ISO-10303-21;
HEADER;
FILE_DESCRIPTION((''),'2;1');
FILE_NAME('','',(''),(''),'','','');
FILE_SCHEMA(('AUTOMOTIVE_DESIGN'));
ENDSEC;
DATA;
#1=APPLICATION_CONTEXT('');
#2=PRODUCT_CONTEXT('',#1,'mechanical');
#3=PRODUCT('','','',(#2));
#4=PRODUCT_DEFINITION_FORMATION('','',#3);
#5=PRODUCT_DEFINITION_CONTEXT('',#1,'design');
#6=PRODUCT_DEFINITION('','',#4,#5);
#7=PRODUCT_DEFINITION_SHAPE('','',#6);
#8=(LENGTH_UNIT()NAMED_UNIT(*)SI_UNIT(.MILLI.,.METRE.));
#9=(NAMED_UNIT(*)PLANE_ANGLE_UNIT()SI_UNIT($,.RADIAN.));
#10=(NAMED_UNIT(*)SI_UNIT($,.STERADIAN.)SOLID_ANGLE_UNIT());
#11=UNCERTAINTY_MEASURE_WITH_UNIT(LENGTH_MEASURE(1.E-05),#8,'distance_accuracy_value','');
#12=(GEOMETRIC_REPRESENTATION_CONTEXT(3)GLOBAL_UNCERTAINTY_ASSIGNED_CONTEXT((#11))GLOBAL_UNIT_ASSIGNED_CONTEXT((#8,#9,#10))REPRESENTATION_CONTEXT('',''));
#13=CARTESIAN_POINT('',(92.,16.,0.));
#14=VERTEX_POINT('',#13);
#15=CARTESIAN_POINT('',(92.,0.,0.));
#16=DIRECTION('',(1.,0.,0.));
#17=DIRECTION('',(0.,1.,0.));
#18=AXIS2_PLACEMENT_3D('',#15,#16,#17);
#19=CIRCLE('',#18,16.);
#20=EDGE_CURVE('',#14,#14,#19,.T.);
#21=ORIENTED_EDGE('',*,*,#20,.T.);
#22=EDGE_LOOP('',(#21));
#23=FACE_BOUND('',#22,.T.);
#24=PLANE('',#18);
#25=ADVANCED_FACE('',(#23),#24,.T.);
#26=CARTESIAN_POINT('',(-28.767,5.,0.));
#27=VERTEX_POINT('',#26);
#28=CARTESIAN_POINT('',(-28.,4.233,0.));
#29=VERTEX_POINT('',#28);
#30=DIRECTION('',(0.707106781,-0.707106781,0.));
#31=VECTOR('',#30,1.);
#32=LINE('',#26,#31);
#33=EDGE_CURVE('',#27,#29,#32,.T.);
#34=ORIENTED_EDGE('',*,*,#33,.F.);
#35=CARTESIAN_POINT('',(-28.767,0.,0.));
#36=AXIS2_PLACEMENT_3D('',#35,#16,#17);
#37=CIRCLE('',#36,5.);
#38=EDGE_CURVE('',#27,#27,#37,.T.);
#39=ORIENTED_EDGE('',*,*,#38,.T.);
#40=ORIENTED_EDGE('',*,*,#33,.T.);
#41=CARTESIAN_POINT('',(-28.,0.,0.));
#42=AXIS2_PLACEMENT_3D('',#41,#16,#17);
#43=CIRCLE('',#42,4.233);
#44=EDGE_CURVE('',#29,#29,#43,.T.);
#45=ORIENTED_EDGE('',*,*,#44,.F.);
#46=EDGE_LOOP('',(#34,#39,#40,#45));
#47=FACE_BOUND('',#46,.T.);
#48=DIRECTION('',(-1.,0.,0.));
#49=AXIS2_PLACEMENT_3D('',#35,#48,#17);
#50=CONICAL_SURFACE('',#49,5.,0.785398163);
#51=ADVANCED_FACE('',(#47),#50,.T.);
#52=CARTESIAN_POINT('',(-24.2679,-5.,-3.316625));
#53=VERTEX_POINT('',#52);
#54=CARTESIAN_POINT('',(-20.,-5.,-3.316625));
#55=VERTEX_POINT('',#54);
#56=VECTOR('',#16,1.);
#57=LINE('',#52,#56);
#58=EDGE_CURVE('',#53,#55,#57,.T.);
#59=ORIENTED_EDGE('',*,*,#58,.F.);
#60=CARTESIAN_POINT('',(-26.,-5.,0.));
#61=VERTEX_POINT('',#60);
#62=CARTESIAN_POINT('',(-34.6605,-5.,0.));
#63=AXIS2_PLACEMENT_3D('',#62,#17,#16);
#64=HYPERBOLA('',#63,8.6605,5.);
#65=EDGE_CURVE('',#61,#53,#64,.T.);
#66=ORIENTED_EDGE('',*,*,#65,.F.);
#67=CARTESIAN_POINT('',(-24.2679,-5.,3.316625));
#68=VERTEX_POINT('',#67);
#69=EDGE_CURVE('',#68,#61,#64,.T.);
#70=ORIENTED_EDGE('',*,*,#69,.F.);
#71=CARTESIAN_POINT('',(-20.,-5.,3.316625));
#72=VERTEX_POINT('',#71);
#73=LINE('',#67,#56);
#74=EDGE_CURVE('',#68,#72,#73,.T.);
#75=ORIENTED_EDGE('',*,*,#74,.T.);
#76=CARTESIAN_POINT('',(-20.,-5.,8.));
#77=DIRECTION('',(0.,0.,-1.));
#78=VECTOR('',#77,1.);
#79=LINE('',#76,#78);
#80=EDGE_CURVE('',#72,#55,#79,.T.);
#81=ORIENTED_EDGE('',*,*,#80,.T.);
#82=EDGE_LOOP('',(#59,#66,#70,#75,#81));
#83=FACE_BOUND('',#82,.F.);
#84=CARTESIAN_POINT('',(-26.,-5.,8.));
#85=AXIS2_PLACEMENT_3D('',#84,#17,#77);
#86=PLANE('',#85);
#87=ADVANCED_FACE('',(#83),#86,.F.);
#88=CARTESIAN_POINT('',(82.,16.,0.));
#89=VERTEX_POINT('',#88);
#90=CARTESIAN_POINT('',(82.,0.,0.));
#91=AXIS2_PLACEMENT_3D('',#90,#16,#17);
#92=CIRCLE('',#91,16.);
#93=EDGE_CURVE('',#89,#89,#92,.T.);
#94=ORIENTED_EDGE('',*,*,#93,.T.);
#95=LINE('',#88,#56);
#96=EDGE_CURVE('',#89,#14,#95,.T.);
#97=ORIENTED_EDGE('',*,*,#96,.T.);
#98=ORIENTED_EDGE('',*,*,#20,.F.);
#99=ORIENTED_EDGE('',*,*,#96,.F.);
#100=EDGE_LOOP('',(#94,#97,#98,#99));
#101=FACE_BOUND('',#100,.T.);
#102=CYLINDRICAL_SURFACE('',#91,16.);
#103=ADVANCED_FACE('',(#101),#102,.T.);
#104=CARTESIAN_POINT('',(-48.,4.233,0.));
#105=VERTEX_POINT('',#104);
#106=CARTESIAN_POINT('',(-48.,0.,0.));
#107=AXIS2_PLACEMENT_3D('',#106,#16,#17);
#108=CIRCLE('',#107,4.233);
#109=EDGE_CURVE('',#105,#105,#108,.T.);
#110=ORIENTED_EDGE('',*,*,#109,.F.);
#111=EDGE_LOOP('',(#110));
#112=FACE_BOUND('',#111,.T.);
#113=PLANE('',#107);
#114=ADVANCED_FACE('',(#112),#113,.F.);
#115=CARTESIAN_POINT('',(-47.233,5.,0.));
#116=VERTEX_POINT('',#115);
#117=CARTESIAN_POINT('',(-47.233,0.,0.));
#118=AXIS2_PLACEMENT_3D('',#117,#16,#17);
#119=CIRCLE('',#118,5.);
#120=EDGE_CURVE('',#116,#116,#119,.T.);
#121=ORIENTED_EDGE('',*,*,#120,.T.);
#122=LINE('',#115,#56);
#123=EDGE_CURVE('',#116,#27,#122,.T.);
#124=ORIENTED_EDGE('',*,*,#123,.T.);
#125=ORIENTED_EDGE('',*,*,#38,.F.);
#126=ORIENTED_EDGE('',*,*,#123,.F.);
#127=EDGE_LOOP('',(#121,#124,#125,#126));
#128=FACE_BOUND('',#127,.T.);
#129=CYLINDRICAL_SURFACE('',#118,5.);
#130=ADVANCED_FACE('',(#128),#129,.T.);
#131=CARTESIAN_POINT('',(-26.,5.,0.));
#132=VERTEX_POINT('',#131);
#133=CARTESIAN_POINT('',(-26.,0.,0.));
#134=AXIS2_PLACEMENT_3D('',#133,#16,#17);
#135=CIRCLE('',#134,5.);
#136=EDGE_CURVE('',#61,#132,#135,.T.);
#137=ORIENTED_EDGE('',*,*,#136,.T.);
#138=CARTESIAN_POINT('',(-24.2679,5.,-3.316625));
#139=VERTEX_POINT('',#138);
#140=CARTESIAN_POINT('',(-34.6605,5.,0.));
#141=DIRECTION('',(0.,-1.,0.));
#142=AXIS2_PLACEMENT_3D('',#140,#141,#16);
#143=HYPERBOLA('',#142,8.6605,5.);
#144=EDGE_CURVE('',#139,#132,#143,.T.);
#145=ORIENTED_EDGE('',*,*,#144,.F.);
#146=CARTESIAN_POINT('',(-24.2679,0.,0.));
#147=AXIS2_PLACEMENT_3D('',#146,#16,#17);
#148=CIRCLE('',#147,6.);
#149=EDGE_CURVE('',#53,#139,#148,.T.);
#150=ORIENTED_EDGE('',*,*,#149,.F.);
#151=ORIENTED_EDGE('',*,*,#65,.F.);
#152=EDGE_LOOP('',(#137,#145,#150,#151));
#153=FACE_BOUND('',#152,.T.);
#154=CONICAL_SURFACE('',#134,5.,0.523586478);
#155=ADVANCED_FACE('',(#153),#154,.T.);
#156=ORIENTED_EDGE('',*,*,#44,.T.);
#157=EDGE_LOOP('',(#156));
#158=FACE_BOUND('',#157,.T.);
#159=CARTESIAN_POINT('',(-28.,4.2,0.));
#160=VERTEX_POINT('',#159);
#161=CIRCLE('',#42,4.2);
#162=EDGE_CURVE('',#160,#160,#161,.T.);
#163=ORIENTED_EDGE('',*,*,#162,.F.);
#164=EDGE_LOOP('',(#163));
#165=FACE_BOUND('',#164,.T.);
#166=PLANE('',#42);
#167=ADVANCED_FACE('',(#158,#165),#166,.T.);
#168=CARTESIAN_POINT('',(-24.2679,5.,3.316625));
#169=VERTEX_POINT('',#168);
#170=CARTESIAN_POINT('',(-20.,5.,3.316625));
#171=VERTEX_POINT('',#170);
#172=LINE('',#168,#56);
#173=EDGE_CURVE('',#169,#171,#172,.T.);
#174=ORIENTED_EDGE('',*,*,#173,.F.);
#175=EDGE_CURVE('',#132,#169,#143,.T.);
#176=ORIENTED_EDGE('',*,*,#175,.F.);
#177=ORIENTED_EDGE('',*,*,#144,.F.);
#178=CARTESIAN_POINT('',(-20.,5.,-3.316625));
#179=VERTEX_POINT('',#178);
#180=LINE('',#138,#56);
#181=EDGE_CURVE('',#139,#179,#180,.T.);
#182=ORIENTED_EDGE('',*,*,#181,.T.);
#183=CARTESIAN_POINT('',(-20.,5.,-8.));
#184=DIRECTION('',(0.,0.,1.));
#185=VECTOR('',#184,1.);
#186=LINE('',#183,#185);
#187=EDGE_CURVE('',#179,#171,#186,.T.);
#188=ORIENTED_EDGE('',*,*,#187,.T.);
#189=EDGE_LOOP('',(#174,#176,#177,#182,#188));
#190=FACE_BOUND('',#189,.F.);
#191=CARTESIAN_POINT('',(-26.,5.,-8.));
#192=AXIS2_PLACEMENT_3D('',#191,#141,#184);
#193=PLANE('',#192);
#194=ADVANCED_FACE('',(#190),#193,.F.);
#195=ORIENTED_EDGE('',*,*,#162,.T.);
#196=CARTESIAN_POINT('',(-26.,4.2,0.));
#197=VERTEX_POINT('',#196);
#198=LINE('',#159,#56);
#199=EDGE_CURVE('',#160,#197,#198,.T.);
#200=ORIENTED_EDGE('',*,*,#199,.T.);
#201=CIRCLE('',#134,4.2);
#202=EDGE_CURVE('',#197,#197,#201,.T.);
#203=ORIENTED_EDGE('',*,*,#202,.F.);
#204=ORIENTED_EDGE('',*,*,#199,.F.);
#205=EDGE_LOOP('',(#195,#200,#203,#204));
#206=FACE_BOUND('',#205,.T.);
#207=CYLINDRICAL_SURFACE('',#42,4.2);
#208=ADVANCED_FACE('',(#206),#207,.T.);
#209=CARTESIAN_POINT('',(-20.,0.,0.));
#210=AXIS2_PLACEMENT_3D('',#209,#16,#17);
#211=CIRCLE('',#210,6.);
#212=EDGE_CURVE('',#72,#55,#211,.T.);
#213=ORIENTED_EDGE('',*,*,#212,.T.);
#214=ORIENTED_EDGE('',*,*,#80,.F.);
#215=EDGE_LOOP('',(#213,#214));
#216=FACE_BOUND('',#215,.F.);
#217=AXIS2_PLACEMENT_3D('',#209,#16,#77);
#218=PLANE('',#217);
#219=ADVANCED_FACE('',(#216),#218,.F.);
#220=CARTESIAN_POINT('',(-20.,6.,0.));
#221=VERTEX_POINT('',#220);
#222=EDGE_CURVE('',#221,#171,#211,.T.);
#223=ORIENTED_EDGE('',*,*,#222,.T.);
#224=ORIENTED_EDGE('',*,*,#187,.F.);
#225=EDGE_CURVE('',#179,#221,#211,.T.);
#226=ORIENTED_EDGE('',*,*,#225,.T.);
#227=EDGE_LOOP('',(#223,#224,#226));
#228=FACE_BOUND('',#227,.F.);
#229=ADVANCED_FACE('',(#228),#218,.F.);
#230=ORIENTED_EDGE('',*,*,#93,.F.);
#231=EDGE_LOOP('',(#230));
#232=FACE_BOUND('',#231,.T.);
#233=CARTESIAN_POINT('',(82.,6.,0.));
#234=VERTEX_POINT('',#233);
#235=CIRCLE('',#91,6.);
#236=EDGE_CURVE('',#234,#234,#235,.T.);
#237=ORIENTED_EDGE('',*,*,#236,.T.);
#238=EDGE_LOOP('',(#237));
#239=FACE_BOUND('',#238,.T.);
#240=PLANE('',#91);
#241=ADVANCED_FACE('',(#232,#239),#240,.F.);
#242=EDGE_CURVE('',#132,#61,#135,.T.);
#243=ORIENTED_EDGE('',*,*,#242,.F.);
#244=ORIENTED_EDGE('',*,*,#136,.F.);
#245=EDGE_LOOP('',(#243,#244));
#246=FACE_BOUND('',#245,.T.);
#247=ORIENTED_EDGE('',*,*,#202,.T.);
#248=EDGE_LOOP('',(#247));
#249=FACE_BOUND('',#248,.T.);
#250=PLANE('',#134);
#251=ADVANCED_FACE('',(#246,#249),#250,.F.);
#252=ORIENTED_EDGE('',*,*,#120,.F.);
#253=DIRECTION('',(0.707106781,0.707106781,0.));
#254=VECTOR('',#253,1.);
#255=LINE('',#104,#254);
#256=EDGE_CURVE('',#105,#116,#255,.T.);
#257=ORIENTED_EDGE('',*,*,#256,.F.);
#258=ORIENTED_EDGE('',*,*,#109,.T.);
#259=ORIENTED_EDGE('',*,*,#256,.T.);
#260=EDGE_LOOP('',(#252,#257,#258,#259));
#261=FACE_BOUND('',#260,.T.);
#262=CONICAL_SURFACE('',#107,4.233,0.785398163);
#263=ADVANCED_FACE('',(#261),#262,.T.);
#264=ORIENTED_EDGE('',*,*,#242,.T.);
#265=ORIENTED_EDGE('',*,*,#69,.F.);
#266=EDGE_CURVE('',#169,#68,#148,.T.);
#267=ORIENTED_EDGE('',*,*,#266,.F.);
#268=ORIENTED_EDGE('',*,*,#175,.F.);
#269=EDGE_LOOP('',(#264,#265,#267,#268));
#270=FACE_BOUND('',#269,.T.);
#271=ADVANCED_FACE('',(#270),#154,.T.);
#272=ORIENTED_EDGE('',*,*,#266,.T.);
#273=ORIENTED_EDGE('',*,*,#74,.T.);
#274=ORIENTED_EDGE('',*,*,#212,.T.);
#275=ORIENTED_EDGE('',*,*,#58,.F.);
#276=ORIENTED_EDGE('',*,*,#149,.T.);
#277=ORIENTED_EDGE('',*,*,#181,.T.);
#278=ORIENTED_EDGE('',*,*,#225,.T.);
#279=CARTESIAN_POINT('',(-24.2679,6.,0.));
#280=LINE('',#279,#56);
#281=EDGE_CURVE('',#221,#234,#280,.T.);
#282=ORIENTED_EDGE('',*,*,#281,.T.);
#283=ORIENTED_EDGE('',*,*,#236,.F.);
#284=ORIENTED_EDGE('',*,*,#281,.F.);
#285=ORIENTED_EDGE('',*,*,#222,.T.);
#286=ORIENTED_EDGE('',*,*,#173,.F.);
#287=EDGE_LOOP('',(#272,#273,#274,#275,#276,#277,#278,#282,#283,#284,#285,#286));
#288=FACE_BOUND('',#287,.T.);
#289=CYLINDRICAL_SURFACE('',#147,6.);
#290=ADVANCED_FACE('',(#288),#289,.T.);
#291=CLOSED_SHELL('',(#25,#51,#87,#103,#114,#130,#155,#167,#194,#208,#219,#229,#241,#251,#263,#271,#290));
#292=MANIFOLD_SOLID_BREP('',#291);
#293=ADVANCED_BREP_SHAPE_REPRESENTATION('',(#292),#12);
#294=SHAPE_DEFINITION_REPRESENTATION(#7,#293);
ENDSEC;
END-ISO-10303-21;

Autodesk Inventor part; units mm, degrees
sketch "Sketch_1" plane through (0, 0, 0) normal (0, 0, 1) x (1, 0, 0)
  line L0 (92, 0) -> (-48, 0)
  line L1 (-48, 0) -> (-48, 4.233)
  line L2 (-48, 4.233) -> (-47.233, 5)
  line L3 (-47.233, 5) -> (-28.767, 5)
  line L4 (-28.767, 5) -> (-28, 4.233)
  line L5 (-28, 4.233) -> (-28, 4.2)
  line L6 (-28, 4.2) -> (-26, 4.2)
  line L7 (-26, 4.2) -> (-26, 5)
  line L8 (-26, 5) -> (-24.2679, 6)
  line L9 (-24.2679, 6) -> (82, 6)
  line L10 (82, 6) -> (82, 16)
  line L11 (82, 16) -> (92, 16)
  line L12 (92, 16) -> (92, 0)
  line L13 (92, 0) -> (-48, 0)
revolve "Revolution1" add sketch "Sketch_1" angle 360 about axis through (92, 0, 0) along (1, 0, 0)
thread "Thread1" size "M10x1.25" class "6g" standard "ISO Metric profile" full length
sketch "Sketch_4" plane through (-26, 0, 0) normal (1, 0, 0) x (0, 0, -1)
  line L0 (-13, -10) -> (13, -10)
  line L1 (13, -10) -> (13, 10)
  line L2 (13, 10) -> (-13, 10)
  line L3 (-13, 10) -> (-13, -10)
  line L4 (-8, 5) -> (-8, -5)
  line L5 (-8, -5) -> (8, -5)
  line L6 (8, -5) -> (8, 5)
  line L7 (8, 5) -> (-8, 5)
extrude "Extrusion1" cut sketch "Sketch_4" along normal blind 6
ref_plane "A4_XY" through (220, 0, 0) normal (0, 1, 0) x (1, 0, 0)
ref_plane "A4_YZ" through (220, 0, 0) normal (1, 0, 0) x (0, 0, -1)
ref_plane "A4_ZX" through (220, 0, 0) normal (0, 0, -1) x (0, 1, 0)
ref_plane "ROD_BODY_XY" through (0, 0, 0) normal (1, 0, 0) x (0, 0, -1)
ref_plane "ROD_BODY_YZ" through (0, 0, 0) normal (0, 0, -1) x (0, 1, 0)
ref_plane "ROD_BODY_ZX" through (0, 0, 0) normal (0, 1, 0) x (1, 0, 0)
ref_plane "ROD_NUT_XY" through (-48, 0, 0) normal (-1, 0, 0) x (0, 0, -1)
ref_plane "ROD_NUT_YZ" through (-48, 0, 0) normal (0, 0, -1) x (0, -1, 0)
ref_plane "ROD_NUT_ZX" through (-48, 0, 0) normal (0, -1, 0) x (-1, 0, 0)
properties part number "CP96S32-50_ROD"
